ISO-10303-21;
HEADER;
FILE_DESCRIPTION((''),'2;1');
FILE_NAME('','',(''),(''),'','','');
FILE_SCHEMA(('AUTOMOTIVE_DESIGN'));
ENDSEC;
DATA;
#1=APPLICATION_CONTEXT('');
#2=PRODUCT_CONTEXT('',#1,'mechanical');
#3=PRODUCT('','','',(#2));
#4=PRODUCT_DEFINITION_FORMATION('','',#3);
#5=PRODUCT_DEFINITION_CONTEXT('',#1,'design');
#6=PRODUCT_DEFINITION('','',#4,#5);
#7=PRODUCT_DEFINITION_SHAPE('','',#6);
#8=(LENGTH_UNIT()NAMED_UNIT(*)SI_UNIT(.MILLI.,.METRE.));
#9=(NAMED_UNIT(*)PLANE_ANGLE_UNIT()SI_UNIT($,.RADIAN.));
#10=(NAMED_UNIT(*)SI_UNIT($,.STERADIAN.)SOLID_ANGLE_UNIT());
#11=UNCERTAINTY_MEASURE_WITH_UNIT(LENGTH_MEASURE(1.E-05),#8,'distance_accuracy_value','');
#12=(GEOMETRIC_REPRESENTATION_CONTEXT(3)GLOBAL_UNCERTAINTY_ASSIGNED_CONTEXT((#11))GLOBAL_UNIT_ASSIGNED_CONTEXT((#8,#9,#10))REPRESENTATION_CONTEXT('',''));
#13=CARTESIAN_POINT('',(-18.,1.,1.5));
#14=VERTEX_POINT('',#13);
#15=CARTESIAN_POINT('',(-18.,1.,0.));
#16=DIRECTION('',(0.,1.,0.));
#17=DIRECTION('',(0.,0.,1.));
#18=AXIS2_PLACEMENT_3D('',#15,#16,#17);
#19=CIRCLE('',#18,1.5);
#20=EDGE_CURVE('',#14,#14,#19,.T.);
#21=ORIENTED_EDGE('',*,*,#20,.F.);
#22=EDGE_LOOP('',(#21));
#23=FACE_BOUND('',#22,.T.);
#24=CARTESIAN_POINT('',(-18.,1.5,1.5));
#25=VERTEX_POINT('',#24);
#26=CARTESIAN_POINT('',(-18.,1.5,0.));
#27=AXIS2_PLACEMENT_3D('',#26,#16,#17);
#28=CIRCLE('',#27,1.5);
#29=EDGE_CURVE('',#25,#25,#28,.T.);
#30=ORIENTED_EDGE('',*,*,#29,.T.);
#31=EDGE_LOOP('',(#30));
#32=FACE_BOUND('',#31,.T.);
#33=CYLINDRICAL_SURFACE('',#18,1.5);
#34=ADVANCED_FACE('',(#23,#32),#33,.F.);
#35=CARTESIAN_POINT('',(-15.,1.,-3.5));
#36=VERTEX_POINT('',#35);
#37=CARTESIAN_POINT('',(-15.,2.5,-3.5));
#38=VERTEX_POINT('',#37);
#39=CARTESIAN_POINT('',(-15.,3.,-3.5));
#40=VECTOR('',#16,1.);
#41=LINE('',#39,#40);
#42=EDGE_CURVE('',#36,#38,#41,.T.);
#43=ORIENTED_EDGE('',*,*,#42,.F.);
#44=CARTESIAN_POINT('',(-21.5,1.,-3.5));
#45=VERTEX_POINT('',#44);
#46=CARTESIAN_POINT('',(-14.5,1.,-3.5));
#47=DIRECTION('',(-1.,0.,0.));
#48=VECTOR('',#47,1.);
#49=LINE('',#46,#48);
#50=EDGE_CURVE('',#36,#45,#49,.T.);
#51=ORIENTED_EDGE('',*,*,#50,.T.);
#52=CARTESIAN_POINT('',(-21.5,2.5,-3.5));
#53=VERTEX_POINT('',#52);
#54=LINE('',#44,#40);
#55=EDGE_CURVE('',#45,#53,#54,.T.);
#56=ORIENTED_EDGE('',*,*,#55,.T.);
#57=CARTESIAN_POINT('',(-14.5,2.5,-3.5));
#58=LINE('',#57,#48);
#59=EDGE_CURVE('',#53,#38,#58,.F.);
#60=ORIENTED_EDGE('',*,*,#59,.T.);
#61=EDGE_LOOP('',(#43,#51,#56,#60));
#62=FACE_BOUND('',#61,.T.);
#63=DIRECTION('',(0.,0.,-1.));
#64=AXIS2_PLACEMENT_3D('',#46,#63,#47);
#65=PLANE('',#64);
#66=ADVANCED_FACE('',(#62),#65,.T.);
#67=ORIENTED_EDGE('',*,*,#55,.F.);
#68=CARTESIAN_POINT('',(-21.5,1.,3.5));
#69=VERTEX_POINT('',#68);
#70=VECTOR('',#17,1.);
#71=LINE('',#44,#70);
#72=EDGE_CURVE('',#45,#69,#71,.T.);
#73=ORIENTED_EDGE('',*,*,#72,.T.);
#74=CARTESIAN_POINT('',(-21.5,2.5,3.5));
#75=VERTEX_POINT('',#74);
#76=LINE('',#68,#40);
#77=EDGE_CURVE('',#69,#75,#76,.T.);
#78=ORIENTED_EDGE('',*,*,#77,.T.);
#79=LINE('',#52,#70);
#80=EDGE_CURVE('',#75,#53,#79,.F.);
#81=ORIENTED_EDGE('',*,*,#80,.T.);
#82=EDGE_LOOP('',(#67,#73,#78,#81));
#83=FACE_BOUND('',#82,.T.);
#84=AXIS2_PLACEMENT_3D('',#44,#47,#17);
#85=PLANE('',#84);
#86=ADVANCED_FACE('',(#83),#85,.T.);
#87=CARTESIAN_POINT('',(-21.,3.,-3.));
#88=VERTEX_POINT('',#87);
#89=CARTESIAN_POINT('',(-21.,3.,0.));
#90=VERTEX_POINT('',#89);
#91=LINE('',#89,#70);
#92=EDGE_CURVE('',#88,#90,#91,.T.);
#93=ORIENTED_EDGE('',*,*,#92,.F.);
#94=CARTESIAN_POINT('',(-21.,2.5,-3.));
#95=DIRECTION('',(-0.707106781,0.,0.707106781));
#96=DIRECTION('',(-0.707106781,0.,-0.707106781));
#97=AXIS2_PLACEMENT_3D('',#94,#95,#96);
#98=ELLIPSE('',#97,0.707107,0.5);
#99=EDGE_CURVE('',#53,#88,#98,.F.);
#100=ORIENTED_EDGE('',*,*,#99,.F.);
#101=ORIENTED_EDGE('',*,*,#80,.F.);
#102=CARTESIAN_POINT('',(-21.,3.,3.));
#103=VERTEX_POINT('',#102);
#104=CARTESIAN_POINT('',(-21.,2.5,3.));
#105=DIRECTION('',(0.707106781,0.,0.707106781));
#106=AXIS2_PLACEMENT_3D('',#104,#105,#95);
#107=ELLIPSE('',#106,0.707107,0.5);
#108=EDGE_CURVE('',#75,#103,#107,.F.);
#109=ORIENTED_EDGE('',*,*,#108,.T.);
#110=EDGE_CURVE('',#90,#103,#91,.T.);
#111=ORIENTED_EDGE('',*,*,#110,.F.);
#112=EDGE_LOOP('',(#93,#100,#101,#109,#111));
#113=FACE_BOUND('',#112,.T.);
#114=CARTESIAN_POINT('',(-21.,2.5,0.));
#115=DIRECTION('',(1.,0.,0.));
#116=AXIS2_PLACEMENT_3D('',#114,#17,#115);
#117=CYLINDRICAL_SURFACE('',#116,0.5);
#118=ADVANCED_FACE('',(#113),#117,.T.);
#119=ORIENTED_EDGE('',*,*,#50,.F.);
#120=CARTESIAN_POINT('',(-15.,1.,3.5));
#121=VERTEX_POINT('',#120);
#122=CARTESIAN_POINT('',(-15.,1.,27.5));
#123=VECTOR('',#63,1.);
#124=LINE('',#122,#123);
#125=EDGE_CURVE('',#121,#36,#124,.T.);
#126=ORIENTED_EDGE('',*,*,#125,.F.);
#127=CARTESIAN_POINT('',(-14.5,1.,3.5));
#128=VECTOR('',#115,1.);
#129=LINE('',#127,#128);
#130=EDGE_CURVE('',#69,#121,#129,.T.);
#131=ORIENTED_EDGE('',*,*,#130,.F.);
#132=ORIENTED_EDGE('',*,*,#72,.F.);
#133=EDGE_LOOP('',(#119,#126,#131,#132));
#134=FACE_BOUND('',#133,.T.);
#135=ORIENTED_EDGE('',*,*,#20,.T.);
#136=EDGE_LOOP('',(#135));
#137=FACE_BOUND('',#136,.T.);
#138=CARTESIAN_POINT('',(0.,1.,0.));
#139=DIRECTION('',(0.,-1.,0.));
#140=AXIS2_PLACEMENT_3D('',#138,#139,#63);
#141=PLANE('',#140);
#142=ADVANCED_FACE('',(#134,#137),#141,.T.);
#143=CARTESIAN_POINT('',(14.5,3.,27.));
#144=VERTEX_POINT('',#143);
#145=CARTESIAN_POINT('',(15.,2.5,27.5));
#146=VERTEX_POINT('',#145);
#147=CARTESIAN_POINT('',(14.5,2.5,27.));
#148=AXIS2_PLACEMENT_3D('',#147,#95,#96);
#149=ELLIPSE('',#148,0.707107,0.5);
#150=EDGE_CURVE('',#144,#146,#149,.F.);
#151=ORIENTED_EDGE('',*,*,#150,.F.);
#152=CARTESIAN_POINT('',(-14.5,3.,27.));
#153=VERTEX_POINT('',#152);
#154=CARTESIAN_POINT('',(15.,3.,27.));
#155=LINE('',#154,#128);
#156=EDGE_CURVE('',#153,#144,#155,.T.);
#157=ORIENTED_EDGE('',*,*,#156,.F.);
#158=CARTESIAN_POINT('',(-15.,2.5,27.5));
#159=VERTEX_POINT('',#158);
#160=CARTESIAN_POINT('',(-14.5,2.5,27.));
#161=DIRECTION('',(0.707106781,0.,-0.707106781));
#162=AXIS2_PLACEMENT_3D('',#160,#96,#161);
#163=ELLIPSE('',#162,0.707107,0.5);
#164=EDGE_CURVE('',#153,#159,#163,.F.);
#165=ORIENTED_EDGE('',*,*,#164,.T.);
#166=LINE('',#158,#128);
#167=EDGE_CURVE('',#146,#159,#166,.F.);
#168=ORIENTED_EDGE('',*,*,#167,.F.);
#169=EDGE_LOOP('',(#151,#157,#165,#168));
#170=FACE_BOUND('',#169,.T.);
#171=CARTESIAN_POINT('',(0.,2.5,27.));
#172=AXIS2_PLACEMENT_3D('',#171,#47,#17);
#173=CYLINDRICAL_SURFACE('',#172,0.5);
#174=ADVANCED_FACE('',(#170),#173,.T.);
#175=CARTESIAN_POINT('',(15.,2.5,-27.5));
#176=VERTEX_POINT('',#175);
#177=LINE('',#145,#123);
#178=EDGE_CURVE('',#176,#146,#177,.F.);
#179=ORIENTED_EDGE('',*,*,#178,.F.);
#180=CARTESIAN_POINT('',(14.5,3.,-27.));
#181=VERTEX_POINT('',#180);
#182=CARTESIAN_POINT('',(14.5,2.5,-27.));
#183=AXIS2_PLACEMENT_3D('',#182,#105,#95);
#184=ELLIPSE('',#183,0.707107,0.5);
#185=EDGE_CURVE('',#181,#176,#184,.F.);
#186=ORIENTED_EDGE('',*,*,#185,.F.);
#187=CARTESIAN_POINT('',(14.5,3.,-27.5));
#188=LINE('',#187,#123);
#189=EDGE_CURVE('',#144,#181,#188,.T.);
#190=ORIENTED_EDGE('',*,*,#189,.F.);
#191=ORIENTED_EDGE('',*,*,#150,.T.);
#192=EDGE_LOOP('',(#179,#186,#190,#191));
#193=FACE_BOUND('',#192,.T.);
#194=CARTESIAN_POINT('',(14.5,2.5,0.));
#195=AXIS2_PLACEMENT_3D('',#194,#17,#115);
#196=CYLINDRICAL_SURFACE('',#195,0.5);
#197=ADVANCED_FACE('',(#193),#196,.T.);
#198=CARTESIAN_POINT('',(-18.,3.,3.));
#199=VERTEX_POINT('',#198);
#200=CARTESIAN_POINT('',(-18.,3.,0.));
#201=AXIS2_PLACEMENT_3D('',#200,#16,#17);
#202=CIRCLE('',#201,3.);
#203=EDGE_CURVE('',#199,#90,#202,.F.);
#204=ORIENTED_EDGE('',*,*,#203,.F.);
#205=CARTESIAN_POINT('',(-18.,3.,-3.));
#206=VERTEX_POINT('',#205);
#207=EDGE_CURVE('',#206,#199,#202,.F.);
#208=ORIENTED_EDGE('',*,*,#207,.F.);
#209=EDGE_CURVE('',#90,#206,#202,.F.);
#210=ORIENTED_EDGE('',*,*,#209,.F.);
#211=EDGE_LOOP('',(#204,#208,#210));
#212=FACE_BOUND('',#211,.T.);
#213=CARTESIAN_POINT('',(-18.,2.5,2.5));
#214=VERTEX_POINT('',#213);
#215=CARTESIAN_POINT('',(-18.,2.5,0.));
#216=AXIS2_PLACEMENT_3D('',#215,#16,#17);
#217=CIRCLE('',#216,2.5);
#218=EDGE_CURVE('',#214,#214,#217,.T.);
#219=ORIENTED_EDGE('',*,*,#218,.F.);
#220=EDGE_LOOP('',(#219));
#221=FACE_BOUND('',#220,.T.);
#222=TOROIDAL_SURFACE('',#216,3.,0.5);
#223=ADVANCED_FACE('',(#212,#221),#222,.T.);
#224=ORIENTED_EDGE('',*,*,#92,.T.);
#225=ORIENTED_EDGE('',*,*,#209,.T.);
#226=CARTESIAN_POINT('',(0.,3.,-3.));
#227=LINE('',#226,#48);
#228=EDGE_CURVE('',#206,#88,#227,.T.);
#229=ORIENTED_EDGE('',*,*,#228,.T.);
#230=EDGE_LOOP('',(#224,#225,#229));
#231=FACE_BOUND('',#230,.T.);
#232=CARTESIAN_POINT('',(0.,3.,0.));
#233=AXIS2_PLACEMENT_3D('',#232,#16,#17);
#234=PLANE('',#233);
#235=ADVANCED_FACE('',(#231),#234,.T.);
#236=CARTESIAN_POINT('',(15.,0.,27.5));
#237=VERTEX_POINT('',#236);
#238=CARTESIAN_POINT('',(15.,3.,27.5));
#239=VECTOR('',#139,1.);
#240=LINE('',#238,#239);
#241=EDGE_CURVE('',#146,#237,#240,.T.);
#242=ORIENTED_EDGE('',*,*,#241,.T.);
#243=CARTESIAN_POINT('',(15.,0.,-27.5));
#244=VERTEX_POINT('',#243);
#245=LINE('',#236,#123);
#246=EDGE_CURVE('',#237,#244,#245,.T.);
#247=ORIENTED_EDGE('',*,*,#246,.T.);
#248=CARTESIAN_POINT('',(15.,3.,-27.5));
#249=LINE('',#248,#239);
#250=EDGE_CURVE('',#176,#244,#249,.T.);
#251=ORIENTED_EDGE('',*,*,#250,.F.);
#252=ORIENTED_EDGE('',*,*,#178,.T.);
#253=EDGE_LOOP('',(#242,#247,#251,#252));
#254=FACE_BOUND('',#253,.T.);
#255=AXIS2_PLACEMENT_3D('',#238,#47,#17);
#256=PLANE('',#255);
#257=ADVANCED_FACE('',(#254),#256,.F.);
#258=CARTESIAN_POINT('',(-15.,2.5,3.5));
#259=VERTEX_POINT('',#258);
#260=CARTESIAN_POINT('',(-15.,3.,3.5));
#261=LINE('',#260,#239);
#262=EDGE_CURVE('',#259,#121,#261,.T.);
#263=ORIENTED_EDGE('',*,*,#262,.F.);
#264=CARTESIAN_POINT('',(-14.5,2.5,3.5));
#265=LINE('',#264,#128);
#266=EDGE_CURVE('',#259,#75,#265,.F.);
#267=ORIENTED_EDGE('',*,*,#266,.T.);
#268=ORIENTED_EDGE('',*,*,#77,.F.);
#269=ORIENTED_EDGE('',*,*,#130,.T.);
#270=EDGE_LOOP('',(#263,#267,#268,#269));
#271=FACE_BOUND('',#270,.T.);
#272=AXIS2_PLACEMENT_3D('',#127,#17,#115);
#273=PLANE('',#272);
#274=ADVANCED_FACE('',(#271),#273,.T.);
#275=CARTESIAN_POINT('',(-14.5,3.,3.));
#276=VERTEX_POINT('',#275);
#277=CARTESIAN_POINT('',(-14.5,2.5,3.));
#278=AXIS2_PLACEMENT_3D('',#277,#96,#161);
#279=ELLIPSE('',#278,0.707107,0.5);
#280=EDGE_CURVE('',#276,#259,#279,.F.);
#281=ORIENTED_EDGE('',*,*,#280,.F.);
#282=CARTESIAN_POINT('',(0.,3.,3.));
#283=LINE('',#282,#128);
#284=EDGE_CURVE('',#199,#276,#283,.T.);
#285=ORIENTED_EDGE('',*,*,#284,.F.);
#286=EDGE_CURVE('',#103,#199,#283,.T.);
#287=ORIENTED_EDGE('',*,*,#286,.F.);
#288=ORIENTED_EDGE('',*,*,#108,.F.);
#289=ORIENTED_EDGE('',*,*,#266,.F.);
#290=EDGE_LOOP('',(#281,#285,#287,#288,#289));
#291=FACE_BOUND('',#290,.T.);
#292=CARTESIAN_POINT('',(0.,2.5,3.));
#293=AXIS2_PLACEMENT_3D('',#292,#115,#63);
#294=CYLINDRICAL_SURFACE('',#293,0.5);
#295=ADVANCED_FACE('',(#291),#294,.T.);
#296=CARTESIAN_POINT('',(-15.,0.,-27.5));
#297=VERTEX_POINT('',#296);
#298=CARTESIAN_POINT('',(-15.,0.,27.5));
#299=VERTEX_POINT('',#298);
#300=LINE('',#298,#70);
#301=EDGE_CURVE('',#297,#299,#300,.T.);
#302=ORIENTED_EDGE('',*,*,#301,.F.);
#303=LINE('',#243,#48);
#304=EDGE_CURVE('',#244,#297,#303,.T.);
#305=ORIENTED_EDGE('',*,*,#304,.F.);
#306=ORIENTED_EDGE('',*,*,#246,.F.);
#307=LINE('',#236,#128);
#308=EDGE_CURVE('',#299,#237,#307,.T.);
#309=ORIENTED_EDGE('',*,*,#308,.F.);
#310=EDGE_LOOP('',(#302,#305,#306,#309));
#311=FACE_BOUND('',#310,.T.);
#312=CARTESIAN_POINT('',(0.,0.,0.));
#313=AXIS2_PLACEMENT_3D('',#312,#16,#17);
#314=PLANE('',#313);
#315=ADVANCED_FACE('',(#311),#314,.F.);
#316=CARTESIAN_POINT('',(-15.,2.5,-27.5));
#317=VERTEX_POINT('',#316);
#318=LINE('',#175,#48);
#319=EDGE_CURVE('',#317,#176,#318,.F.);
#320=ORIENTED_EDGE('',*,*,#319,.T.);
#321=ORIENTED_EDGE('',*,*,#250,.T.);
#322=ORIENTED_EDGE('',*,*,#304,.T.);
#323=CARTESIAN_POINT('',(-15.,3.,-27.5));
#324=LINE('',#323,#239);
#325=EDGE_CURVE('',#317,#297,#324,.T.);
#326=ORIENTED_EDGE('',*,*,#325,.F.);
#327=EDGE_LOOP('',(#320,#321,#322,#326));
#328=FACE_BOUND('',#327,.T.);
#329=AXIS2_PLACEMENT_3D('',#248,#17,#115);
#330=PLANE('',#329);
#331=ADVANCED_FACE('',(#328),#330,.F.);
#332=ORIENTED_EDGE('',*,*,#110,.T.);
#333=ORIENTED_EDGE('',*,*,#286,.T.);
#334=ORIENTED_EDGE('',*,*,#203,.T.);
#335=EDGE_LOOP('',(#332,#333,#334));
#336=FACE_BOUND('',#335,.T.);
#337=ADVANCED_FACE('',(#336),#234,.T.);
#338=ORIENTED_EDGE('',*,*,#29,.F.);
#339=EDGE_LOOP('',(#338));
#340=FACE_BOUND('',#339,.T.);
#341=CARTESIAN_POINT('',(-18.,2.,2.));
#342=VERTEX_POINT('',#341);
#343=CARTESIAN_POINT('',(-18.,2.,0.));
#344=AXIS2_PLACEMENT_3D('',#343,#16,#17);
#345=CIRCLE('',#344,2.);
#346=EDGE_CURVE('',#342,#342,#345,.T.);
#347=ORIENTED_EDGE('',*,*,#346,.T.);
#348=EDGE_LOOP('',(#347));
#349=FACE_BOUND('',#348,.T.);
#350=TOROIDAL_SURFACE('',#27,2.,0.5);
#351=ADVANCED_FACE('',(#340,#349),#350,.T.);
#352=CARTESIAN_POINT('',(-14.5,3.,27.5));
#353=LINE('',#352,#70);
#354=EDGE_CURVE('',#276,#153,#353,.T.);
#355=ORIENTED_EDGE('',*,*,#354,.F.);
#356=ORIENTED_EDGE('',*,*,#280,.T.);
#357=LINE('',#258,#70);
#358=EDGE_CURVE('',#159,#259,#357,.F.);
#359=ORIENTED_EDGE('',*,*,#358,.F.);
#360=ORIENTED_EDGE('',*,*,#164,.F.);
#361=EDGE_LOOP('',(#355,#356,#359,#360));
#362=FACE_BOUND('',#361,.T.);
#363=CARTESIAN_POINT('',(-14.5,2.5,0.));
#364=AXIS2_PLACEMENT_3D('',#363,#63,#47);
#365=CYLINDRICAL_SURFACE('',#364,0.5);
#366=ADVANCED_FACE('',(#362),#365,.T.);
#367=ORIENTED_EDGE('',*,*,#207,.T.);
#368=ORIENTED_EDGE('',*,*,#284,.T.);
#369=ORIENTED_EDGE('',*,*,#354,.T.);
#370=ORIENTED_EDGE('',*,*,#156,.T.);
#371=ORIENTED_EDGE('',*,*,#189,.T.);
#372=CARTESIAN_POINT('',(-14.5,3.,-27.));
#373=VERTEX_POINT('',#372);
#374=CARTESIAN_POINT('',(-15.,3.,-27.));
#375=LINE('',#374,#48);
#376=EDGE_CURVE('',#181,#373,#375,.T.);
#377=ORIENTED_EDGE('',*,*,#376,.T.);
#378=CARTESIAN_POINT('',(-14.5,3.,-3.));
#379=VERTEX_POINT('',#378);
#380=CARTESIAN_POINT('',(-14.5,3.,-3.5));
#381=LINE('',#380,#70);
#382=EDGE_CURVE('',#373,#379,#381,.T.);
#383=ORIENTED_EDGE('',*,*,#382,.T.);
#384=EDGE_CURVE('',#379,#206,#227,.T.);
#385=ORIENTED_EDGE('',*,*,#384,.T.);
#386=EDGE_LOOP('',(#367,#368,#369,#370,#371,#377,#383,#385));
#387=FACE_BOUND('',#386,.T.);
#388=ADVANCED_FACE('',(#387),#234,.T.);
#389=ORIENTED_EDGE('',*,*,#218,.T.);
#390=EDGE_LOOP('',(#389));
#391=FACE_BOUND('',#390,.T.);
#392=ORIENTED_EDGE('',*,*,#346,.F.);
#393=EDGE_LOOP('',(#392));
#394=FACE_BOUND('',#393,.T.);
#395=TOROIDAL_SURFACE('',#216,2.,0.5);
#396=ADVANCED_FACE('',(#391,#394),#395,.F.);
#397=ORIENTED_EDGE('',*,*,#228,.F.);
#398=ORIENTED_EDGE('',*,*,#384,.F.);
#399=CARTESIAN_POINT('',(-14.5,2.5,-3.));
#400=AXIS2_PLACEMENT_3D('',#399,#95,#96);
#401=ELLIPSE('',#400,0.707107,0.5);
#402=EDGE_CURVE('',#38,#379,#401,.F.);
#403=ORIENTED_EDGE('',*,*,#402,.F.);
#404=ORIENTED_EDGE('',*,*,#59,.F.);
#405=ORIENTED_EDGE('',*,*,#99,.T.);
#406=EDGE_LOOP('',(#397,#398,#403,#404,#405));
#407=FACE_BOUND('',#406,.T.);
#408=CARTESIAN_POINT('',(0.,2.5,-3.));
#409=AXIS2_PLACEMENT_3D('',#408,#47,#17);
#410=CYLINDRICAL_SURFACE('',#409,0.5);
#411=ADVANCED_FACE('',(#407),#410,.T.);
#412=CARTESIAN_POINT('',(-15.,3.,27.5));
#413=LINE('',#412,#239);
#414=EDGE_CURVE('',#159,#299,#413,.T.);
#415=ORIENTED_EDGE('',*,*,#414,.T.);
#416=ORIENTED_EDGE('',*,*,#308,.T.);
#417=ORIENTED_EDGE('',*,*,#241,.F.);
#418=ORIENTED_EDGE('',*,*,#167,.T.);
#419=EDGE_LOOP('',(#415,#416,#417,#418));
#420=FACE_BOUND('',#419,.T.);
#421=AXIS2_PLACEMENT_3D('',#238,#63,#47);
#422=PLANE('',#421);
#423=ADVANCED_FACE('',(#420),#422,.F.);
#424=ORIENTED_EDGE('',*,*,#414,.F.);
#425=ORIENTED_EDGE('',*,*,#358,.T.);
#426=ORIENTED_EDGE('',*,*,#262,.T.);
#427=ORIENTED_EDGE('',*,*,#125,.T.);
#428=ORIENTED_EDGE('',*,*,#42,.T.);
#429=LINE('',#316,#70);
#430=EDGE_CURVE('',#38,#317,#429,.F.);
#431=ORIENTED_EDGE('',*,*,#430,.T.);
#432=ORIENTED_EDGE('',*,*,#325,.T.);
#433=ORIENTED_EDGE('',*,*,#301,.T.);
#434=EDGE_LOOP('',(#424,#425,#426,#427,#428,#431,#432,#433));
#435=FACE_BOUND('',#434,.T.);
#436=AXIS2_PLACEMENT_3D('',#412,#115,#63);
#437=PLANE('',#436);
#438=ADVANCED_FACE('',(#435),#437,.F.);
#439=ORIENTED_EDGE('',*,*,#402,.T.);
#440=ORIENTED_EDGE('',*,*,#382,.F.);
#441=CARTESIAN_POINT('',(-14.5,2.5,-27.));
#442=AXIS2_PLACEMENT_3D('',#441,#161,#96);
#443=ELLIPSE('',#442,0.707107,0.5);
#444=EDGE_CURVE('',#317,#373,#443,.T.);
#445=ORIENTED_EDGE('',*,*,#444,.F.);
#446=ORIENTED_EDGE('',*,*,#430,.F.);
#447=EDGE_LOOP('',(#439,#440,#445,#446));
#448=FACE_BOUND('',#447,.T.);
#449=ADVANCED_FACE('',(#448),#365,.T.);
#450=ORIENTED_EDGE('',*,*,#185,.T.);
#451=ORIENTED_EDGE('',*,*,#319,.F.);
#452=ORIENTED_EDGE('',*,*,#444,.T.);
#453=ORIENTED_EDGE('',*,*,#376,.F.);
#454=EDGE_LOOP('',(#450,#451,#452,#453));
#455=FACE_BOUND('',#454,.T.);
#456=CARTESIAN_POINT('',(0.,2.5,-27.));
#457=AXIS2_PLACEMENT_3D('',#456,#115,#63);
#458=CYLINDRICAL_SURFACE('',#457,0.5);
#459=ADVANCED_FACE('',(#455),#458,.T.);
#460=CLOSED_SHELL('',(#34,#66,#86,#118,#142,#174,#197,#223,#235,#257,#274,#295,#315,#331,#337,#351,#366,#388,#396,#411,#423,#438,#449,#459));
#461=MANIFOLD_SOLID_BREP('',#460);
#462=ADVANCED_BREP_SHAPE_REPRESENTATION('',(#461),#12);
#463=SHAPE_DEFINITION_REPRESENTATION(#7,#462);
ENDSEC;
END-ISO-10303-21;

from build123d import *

# Parameters (mm, degrees)
SKETCH1_W           = 30
SKETCH1_H           = 55
BOSS_EXTRUDE1_DEPTH = 3
SKETCH2_W           = 7
SKETCH2_H           = 7
BOSS_EXTRUDE2_DEPTH = 2
SKETCH3_R           = 1.5
CUT_EXTRUDE1_DEPTH  = 2
SKETCH4_R           = 2.5
CUT_EXTRUDE2_DEPTH  = 1
FILLET2_R           = 0.5


with BuildPart() as part:
    # Sketch1 → Boss-Extrude1 (new body)
    with BuildSketch(Plane(origin=(0, 0, 0), x_dir=(1, 0, 0), z_dir=(0, 1, 0))):
        Rectangle(SKETCH1_W, SKETCH1_H)
    extrude(amount=BOSS_EXTRUDE1_DEPTH)

    # Sketch2 → Boss-Extrude2 (add)
    with BuildSketch(Plane(origin=(0, 3, 0), x_dir=(1, 0, 0), z_dir=(0, 1, 0))):
        with Locations((-18, 0)):
            Rectangle(SKETCH2_W, SKETCH2_H)
    extrude(amount=-BOSS_EXTRUDE2_DEPTH)

    # Sketch3 → Cut-Extrude1 (cut)
    with BuildSketch(Plane(origin=(0, 3, 0), x_dir=(1, 0, 0), z_dir=(0, 1, 0))):
        with Locations(Location((-18, 0, 0), (0, 0, 270))):
            Circle(SKETCH3_R)
    extrude(amount=-CUT_EXTRUDE1_DEPTH, mode=Mode.SUBTRACT)

    # Sketch4 → Cut-Extrude2 (cut)
    with BuildSketch(Plane(origin=(0, 3, 0), x_dir=(1, 0, 0), z_dir=(0, 1, 0))):
        with Locations(Location((-18, 0, 0), (0, 0, 270))):
            Circle(SKETCH4_R)
    extrude(amount=-CUT_EXTRUDE2_DEPTH, mode=Mode.SUBTRACT)

    # Fillet2
    fillet2_edges = [part.edges().sort_by_distance(p)[0] for p in [
        (15, 3, 0),
        (-15, 3, 15.5),
        (-18.25, 3, 3.5),
        (0, 3, -27.5),
        (-18.25, 3, -3.5),
        (-21.5, 3, 0),
        (-18, 3, -2.5),
        (-18, 2, -2.5),
        (-18, 2, -1.5),
        (-15, 3, -15.5),
        (0, 3, 27.5),
    ]]
    fillet(fillet2_edges, radius=FILLET2_R - 0.0001)  # a hair under: the kernel refuses the full size


solid = part.part
